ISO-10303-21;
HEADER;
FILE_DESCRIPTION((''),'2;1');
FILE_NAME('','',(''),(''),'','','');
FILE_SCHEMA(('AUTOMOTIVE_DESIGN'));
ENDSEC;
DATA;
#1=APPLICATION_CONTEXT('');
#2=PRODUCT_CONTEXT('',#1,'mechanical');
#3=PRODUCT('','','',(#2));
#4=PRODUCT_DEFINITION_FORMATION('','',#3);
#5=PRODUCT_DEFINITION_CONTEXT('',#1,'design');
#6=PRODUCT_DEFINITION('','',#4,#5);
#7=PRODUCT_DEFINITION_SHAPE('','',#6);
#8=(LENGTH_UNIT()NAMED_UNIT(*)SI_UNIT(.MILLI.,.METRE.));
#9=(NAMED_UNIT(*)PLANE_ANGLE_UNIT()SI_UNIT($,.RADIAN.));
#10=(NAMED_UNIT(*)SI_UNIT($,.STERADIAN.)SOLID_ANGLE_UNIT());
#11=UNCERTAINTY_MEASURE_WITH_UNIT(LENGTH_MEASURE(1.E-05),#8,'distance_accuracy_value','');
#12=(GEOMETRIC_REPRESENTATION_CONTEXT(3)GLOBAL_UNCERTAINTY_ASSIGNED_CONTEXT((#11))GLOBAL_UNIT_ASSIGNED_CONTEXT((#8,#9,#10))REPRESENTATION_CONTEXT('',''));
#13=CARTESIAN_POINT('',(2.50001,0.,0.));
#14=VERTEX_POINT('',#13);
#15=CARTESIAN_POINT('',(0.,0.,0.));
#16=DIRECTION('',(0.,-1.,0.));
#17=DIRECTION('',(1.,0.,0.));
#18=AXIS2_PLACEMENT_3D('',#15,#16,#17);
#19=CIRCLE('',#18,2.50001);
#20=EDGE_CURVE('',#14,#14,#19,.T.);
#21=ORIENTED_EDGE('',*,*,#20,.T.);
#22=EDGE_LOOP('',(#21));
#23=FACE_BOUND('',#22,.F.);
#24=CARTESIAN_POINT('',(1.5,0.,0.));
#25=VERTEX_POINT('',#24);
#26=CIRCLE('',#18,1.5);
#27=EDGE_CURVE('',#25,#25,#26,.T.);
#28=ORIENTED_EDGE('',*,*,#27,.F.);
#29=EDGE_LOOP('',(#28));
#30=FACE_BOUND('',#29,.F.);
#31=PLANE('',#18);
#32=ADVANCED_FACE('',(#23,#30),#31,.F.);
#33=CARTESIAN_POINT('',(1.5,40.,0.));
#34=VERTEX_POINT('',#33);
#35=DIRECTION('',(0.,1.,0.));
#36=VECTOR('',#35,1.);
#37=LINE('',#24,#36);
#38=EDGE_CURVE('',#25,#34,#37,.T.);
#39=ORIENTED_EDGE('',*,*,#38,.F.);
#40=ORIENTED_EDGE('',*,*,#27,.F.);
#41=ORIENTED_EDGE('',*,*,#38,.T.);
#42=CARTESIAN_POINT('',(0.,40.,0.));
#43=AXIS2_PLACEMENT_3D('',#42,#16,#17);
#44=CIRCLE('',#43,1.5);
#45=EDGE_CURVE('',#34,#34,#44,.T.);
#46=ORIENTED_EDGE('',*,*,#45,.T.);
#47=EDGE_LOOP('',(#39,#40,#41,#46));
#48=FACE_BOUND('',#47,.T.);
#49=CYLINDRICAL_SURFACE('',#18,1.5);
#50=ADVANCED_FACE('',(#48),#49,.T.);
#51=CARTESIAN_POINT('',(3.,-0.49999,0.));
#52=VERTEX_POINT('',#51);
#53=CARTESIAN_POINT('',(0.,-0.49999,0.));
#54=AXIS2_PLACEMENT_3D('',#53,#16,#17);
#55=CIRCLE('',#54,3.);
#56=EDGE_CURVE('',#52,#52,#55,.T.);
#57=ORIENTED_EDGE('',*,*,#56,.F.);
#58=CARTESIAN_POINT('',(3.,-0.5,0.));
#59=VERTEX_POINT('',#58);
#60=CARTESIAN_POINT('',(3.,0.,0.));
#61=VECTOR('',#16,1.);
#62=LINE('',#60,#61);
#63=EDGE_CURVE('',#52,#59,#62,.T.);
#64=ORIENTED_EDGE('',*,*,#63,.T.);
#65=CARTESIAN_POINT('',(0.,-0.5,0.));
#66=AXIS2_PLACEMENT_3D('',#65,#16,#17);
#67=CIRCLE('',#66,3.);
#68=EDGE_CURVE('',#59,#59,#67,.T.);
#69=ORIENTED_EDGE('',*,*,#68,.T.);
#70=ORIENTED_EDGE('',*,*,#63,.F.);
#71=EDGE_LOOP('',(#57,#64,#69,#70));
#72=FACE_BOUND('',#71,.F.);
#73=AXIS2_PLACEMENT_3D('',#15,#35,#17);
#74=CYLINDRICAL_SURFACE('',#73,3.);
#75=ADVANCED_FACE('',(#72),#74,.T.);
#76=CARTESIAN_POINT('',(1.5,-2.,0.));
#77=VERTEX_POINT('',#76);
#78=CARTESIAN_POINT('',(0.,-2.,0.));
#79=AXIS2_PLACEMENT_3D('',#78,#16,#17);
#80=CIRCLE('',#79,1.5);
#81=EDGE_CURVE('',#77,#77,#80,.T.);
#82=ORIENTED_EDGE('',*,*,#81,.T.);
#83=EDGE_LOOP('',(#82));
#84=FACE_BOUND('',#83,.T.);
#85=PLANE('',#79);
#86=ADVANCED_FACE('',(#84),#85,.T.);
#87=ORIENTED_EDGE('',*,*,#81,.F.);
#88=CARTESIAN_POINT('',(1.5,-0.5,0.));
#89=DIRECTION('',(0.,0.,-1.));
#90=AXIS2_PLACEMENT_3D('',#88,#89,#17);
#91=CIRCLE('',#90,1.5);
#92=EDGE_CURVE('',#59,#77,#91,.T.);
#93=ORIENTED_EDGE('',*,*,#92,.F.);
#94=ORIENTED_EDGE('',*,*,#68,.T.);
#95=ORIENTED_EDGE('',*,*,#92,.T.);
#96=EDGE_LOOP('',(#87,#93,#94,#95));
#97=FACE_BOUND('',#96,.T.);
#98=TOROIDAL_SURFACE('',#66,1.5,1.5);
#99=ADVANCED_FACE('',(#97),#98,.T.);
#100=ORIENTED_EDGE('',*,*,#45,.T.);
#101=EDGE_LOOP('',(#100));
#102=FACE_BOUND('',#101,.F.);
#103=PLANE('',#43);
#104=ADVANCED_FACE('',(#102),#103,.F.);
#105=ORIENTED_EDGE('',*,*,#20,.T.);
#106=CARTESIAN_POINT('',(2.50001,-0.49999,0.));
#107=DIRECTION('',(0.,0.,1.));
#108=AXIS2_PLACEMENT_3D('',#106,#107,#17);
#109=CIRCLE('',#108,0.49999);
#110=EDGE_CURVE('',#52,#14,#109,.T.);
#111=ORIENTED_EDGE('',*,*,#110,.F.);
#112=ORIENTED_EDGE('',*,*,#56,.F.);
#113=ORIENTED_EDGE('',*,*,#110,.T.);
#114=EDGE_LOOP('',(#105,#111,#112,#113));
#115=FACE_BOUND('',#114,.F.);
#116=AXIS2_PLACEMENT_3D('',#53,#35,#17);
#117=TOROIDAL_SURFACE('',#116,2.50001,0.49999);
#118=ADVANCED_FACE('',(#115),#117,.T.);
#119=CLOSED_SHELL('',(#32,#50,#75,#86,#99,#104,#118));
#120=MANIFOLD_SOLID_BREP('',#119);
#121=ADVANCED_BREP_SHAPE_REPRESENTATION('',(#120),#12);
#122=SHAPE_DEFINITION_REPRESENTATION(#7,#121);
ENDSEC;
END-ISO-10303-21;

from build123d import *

# Parameters (mm, degrees)
F0_R     = 1.5
F1_DEPTH = 40
F2_R     = 3
F3_DEPTH = 2
F4_R     = 1.5
F5_R     = 0.49999


# Not quite as in the source:
# - a fillet or chamfer is up to 0.001 mm smaller than in the source, because OpenCascade refuses the exact size


with BuildPart() as f1:
    # F0 (on Front) → F1 (new body)
    with BuildSketch(Plane.XZ):
        Circle(F0_R)
    extrude(amount=-F1_DEPTH)

    # F2 (on face) → F3 (join)
    with BuildSketch(Plane.XZ):
        Circle(F2_R)
    extrude(amount=F3_DEPTH)

    # F4
    f4_edges = [f1.edges().sort_by_distance(p)[0] for p in [
        (-3, -2, 0),
    ]]
    fillet(f4_edges, radius=F4_R)

    # F5 (radius 0.5 in the source; OpenCascade refuses exactly that, so slightly less here)
    f5_edges = [f1.edges().sort_by_distance(p)[0] for p in [
        (-3, 0, 0),
    ]]
    fillet(f5_edges, radius=F5_R)


solid = f1.part
